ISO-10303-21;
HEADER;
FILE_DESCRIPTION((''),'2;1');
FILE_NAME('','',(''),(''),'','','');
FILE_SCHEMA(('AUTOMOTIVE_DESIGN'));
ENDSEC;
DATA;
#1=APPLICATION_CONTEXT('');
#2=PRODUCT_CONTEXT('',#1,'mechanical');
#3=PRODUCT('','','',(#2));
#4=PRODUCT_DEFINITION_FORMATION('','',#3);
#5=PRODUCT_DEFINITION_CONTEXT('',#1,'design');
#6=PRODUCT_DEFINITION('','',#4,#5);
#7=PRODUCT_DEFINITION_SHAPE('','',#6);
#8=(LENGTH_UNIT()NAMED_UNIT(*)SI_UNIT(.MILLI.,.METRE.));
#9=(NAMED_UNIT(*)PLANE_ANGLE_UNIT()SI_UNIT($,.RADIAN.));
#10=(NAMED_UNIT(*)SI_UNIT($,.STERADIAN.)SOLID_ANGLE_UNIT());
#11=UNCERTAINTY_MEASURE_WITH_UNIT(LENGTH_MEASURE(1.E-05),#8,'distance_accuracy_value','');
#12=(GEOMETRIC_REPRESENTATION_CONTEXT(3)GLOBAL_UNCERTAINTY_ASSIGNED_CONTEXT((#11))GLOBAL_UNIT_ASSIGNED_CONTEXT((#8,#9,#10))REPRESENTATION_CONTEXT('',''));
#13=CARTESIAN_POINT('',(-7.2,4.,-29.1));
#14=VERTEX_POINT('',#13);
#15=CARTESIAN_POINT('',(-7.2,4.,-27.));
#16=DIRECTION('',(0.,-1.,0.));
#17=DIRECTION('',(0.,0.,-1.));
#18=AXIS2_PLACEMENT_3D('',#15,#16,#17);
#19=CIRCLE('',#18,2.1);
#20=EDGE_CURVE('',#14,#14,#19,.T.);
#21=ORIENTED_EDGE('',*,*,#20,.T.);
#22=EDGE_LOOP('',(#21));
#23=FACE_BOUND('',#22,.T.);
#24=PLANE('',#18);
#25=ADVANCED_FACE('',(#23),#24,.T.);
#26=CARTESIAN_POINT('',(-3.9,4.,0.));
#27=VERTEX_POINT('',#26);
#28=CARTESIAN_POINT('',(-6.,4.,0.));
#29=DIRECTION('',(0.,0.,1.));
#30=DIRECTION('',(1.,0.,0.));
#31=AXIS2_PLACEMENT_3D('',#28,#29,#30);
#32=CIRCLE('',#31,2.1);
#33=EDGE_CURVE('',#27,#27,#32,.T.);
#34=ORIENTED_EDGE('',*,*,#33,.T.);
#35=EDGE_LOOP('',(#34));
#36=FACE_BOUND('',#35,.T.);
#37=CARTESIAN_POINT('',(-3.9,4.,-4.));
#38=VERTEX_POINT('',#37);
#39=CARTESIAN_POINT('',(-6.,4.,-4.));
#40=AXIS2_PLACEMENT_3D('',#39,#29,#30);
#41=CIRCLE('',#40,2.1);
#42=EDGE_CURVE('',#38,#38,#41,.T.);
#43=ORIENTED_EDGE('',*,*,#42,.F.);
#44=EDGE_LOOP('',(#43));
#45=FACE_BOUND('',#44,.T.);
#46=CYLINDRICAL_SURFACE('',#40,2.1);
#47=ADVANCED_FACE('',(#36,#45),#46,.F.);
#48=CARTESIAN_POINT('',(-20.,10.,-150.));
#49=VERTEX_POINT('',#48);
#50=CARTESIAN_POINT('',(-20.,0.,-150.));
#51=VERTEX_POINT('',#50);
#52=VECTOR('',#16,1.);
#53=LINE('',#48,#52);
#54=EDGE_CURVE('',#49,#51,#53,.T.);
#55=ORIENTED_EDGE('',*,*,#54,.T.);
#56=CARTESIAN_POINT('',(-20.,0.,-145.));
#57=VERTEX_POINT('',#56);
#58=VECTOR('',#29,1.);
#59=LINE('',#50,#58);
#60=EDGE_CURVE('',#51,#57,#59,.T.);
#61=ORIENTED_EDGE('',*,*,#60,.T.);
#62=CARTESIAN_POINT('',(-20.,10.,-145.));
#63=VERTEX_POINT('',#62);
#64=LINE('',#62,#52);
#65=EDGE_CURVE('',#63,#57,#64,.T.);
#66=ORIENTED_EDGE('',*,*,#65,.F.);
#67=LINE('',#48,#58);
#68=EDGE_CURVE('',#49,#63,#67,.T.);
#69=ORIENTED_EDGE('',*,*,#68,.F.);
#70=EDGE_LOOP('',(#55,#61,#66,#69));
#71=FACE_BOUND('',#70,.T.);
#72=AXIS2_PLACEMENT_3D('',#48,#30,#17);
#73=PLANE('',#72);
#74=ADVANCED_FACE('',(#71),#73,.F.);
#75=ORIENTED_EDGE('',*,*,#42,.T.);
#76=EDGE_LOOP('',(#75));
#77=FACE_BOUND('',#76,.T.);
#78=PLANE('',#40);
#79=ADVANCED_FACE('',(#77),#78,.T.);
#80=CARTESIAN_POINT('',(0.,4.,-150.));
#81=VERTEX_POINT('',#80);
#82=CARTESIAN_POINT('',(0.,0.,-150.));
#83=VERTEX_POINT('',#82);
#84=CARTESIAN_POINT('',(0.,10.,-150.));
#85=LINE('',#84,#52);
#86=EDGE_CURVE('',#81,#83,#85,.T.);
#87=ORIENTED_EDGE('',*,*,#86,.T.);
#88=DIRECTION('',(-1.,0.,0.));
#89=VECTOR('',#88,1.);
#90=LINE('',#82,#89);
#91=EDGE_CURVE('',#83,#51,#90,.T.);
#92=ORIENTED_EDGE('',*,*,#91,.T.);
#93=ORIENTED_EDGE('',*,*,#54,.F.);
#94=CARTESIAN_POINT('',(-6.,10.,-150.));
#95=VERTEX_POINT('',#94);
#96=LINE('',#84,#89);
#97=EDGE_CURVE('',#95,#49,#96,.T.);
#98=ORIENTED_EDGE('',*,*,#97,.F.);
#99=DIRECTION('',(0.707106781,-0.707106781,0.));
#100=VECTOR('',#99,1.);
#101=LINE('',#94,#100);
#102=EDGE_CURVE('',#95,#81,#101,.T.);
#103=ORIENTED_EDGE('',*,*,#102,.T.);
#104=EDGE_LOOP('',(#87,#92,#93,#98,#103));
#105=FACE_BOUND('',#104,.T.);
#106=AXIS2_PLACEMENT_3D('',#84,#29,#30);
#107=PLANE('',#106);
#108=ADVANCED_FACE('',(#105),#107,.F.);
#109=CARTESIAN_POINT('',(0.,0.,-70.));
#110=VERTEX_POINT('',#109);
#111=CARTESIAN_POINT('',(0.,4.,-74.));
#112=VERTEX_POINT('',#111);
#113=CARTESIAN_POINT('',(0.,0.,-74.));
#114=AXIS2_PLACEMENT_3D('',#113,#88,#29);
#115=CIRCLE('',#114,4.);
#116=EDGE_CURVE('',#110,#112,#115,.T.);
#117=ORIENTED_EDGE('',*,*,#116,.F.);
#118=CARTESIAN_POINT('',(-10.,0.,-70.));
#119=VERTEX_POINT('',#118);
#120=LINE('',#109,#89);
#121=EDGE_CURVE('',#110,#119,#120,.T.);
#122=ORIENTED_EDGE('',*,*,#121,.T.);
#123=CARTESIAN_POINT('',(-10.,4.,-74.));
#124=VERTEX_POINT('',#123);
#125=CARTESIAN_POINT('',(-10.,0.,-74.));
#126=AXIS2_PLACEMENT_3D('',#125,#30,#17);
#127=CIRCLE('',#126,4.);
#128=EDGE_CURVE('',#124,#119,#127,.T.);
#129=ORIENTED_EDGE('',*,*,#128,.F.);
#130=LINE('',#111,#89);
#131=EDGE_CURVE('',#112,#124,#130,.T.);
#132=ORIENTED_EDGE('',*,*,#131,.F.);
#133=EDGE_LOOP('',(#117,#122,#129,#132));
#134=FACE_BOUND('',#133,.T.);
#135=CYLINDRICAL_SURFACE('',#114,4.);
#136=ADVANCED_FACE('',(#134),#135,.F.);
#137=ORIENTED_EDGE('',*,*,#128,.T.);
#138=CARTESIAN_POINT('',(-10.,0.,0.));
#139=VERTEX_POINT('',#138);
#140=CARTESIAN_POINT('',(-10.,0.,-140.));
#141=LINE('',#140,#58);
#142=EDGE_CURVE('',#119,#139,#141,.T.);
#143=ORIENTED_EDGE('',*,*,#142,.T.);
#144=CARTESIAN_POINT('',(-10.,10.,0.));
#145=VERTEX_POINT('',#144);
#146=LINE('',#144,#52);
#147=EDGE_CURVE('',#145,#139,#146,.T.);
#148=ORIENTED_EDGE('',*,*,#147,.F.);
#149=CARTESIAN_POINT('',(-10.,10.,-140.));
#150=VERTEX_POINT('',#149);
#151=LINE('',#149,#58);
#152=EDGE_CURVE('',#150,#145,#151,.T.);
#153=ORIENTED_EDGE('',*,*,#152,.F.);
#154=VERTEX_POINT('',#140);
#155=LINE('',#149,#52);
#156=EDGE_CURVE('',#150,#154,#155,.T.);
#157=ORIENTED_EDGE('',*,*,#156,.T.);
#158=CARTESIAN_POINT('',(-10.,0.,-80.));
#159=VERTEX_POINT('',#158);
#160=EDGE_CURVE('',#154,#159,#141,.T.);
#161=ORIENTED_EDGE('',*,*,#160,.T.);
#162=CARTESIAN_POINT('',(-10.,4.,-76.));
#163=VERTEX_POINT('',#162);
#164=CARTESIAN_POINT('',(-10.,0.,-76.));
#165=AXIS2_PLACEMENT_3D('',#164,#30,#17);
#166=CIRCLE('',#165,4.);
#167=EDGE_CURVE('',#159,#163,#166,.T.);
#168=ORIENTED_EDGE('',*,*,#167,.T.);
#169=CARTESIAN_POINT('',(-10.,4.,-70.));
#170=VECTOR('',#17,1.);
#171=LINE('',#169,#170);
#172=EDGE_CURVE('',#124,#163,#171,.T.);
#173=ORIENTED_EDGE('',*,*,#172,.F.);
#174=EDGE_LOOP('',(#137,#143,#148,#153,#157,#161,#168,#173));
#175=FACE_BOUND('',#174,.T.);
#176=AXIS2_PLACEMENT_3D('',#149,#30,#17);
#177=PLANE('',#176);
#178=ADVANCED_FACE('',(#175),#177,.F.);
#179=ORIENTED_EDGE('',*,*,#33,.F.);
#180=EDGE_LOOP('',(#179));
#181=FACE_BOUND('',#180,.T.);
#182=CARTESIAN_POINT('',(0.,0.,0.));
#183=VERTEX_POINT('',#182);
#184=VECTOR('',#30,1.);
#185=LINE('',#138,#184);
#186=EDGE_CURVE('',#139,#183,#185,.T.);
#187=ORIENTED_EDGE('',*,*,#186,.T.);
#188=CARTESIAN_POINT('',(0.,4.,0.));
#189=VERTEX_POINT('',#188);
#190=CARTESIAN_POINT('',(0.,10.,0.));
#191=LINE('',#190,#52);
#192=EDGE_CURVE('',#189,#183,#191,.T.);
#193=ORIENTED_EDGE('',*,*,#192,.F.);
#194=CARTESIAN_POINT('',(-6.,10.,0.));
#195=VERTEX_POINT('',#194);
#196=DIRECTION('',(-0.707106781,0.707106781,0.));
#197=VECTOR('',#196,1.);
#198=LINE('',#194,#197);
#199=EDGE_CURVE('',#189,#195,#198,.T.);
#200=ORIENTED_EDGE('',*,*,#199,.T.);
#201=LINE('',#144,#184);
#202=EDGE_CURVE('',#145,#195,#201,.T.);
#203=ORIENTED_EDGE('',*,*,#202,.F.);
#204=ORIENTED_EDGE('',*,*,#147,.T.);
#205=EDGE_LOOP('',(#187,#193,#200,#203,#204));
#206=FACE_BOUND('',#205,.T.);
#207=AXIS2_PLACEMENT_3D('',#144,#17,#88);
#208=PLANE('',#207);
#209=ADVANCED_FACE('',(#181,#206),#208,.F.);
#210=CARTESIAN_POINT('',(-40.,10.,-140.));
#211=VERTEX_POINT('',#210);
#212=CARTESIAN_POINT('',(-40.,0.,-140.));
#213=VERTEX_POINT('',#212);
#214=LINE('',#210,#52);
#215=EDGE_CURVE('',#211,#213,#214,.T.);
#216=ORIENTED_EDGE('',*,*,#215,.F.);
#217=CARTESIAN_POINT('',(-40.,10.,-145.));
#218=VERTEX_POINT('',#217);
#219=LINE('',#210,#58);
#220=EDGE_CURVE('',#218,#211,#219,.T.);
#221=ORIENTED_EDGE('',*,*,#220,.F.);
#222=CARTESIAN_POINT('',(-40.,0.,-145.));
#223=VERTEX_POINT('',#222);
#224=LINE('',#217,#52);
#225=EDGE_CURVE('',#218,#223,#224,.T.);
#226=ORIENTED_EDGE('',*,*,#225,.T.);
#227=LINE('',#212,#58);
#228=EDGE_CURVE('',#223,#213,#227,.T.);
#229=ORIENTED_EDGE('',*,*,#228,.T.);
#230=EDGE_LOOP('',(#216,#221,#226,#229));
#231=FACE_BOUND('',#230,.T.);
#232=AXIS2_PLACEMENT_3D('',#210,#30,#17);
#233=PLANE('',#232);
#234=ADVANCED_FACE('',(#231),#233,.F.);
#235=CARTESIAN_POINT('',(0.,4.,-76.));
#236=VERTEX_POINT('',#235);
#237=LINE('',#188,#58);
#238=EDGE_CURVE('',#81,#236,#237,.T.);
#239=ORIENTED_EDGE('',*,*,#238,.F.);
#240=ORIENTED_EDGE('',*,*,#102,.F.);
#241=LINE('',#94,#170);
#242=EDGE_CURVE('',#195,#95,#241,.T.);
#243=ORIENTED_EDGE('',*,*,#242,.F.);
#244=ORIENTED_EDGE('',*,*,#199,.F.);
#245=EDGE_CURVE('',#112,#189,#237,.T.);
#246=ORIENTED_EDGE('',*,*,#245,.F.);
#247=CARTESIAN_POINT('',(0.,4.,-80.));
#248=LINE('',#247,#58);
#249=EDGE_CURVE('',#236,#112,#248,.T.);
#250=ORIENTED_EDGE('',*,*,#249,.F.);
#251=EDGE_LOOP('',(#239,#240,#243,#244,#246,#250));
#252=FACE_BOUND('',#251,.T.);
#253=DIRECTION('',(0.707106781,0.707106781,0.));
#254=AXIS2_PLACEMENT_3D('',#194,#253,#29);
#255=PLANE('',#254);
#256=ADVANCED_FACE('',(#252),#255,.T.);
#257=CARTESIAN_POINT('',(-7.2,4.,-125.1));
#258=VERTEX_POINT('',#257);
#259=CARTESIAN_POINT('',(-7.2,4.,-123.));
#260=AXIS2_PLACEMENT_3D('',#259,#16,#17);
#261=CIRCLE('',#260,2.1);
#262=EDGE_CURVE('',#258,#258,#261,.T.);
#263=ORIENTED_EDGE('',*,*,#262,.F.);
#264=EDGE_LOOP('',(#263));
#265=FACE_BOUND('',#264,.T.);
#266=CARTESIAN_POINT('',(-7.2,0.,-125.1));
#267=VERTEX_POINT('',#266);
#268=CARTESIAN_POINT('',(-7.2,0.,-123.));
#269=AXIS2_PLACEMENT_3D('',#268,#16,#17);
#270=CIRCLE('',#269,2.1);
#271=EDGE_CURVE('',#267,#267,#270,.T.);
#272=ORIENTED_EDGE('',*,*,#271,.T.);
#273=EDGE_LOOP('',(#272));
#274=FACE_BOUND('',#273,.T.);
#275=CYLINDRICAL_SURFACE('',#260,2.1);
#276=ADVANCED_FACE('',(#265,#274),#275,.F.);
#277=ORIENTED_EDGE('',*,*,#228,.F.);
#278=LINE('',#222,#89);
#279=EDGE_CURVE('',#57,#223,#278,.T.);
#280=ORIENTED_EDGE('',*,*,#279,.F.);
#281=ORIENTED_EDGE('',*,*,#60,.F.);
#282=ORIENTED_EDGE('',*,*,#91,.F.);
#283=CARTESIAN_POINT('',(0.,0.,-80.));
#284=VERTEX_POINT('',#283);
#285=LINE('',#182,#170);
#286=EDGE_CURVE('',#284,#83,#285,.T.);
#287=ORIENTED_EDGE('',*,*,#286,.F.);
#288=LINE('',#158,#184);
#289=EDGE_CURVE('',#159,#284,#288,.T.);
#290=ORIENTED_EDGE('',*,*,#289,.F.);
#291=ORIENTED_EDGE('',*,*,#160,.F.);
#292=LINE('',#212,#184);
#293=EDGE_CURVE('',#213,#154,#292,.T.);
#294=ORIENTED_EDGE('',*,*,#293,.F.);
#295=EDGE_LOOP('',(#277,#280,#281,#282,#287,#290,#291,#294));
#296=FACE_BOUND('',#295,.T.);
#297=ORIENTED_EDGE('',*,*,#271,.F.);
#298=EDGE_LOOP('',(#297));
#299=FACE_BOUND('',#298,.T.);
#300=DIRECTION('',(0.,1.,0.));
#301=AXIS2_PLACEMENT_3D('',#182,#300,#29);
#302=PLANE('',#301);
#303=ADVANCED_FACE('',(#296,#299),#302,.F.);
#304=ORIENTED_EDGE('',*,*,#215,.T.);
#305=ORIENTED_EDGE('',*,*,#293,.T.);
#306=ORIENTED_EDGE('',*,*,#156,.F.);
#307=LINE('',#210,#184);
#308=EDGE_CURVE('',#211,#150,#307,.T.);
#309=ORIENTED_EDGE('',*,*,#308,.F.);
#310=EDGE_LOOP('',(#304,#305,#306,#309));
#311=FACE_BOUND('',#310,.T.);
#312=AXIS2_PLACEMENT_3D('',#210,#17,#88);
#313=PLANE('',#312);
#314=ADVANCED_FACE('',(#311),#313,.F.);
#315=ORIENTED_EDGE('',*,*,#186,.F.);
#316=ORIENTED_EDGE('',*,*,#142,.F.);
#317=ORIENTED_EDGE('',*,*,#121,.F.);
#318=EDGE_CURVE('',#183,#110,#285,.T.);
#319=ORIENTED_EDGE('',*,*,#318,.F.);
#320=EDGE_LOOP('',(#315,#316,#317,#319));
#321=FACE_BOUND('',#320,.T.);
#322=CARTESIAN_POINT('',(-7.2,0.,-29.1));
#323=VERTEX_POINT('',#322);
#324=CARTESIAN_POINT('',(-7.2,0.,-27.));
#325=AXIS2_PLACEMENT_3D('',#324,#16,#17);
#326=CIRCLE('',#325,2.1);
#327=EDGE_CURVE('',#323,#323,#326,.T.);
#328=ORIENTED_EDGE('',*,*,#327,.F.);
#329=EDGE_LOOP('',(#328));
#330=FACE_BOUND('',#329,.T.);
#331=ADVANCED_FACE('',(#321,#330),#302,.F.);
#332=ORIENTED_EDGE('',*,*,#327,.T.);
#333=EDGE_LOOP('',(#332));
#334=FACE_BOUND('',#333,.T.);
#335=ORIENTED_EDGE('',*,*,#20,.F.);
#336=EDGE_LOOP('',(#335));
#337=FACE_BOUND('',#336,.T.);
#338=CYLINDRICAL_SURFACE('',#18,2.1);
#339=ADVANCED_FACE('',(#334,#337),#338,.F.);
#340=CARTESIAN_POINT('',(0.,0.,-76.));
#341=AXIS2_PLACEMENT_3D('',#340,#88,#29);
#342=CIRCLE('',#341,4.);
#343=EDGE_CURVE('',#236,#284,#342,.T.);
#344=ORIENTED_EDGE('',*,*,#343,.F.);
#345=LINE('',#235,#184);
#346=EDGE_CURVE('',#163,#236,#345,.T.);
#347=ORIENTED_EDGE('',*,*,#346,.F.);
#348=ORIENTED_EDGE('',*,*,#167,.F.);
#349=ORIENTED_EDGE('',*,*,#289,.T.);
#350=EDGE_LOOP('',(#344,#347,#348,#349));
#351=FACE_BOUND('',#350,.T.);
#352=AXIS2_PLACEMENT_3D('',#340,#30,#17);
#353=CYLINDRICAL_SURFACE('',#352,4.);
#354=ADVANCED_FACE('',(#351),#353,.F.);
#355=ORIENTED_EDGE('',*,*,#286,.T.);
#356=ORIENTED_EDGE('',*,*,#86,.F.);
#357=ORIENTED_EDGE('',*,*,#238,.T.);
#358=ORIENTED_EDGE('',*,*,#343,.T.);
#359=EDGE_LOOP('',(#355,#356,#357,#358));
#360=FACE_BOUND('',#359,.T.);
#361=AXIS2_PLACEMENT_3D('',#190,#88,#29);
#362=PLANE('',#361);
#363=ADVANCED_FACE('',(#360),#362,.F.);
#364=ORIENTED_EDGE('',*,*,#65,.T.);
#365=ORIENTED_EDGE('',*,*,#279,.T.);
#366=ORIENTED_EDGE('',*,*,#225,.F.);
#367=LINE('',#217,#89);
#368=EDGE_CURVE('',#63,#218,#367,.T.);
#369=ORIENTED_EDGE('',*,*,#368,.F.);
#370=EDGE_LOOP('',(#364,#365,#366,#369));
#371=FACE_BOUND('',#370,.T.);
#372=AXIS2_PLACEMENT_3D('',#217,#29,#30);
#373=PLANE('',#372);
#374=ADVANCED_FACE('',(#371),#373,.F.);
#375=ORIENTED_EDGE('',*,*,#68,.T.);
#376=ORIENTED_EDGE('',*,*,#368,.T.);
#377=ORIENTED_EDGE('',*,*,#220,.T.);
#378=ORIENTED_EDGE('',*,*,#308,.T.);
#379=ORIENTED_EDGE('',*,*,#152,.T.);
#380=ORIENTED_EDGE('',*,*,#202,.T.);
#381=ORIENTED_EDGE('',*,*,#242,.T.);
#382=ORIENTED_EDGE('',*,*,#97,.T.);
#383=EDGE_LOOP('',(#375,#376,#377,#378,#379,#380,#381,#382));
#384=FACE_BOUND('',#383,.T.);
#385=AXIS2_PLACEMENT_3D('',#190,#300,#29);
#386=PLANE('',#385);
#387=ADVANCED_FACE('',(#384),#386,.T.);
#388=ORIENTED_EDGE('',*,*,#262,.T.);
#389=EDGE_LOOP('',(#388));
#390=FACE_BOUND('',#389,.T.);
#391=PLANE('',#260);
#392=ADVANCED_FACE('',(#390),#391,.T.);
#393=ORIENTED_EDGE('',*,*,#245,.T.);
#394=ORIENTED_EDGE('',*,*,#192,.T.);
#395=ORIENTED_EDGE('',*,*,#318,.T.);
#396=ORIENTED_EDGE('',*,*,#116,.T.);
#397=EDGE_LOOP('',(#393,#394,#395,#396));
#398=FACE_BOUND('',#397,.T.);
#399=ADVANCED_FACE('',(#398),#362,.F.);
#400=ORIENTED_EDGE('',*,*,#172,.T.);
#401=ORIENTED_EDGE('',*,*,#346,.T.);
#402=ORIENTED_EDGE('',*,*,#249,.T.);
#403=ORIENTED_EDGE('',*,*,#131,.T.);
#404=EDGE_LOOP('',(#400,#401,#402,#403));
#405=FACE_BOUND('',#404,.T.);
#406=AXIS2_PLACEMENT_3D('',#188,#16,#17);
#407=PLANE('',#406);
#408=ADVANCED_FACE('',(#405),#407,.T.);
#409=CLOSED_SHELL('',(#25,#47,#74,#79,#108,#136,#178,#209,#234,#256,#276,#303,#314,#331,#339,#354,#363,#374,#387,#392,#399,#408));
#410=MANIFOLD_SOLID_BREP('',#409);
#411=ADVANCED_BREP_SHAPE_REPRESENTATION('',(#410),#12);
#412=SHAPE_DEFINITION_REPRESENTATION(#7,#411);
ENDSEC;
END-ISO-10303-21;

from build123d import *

# Parameters (mm, degrees)
DODANIE_WYCI_GNI_CIE1_DEPTH = 10
SZKIC2_R                    = 2.1
WYTNIJ_WYCI_GNI_CIE1_DEPTH  = 4
SZKIC3_R                    = 2.1
WYTNIJ_WYCI_GNI_CIE2_DEPTH  = 4
SFAZOWANIE1_SIZE            = 6
SZKIC4_W                    = 10
SZKIC4_H                    = 10
WYTNIJ_WYCI_GNI_CIE3_DEPTH  = 4
ZAOKR_GLENIE1_R             = 4


with BuildPart() as part:
    # Szkic1 → Dodanie-wyciągnięcie1 (new body)
    with BuildSketch(Plane(origin=(0, 0, 0), x_dir=(1, 0, 0), z_dir=(0, 1, 0))):
        Polygon((0, 0), (0, 150), (-20, 150), (-20, 145), (-40, 145), (-40, 140), (-10, 140), (-10, 0), align=None)
    extrude(amount=DODANIE_WYCI_GNI_CIE1_DEPTH)

    # Szkic2 → Wytnij-wyciągnięcie1 (cut)
    with BuildSketch(Plane.XZ):
        with Locations(Location((-7.2, -123, 0), (0, 0, 270))):
            Circle(SZKIC2_R)
        with Locations(Location((-7.2, -27, 0), (0, 0, 270))):
            Circle(SZKIC2_R)
    extrude(amount=-WYTNIJ_WYCI_GNI_CIE1_DEPTH, mode=Mode.SUBTRACT)

    # Szkic3 → Wytnij-wyciągnięcie2 (cut)
    with BuildSketch(Plane.XY):
        with Locations((-6, 4)):
            Circle(SZKIC3_R)
    extrude(amount=-WYTNIJ_WYCI_GNI_CIE2_DEPTH, mode=Mode.SUBTRACT)

    # Sfazowanie1
    sfazowanie1_edges = [part.edges().sort_by_distance(p)[0] for p in [
        (0, 10, -75),
    ]]
    chamfer(sfazowanie1_edges, length=SFAZOWANIE1_SIZE)

    # Szkic4 → Wytnij-wyciągnięcie3 (cut)
    with BuildSketch(Plane.XZ):
        with Locations((-5, -75)):
            Rectangle(SZKIC4_W, SZKIC4_H)
    extrude(amount=-WYTNIJ_WYCI_GNI_CIE3_DEPTH, mode=Mode.SUBTRACT)

    # Zaokrąglenie1
    zaokr_glenie1_edges = [part.edges().sort_by_distance(p)[0] for p in [
        (-5, 4, -80),
        (-5, 4, -70),
    ]]
    fillet(zaokr_glenie1_edges, radius=ZAOKR_GLENIE1_R - 0.0001)  # a hair under: the kernel refuses the full size


solid = part.part
